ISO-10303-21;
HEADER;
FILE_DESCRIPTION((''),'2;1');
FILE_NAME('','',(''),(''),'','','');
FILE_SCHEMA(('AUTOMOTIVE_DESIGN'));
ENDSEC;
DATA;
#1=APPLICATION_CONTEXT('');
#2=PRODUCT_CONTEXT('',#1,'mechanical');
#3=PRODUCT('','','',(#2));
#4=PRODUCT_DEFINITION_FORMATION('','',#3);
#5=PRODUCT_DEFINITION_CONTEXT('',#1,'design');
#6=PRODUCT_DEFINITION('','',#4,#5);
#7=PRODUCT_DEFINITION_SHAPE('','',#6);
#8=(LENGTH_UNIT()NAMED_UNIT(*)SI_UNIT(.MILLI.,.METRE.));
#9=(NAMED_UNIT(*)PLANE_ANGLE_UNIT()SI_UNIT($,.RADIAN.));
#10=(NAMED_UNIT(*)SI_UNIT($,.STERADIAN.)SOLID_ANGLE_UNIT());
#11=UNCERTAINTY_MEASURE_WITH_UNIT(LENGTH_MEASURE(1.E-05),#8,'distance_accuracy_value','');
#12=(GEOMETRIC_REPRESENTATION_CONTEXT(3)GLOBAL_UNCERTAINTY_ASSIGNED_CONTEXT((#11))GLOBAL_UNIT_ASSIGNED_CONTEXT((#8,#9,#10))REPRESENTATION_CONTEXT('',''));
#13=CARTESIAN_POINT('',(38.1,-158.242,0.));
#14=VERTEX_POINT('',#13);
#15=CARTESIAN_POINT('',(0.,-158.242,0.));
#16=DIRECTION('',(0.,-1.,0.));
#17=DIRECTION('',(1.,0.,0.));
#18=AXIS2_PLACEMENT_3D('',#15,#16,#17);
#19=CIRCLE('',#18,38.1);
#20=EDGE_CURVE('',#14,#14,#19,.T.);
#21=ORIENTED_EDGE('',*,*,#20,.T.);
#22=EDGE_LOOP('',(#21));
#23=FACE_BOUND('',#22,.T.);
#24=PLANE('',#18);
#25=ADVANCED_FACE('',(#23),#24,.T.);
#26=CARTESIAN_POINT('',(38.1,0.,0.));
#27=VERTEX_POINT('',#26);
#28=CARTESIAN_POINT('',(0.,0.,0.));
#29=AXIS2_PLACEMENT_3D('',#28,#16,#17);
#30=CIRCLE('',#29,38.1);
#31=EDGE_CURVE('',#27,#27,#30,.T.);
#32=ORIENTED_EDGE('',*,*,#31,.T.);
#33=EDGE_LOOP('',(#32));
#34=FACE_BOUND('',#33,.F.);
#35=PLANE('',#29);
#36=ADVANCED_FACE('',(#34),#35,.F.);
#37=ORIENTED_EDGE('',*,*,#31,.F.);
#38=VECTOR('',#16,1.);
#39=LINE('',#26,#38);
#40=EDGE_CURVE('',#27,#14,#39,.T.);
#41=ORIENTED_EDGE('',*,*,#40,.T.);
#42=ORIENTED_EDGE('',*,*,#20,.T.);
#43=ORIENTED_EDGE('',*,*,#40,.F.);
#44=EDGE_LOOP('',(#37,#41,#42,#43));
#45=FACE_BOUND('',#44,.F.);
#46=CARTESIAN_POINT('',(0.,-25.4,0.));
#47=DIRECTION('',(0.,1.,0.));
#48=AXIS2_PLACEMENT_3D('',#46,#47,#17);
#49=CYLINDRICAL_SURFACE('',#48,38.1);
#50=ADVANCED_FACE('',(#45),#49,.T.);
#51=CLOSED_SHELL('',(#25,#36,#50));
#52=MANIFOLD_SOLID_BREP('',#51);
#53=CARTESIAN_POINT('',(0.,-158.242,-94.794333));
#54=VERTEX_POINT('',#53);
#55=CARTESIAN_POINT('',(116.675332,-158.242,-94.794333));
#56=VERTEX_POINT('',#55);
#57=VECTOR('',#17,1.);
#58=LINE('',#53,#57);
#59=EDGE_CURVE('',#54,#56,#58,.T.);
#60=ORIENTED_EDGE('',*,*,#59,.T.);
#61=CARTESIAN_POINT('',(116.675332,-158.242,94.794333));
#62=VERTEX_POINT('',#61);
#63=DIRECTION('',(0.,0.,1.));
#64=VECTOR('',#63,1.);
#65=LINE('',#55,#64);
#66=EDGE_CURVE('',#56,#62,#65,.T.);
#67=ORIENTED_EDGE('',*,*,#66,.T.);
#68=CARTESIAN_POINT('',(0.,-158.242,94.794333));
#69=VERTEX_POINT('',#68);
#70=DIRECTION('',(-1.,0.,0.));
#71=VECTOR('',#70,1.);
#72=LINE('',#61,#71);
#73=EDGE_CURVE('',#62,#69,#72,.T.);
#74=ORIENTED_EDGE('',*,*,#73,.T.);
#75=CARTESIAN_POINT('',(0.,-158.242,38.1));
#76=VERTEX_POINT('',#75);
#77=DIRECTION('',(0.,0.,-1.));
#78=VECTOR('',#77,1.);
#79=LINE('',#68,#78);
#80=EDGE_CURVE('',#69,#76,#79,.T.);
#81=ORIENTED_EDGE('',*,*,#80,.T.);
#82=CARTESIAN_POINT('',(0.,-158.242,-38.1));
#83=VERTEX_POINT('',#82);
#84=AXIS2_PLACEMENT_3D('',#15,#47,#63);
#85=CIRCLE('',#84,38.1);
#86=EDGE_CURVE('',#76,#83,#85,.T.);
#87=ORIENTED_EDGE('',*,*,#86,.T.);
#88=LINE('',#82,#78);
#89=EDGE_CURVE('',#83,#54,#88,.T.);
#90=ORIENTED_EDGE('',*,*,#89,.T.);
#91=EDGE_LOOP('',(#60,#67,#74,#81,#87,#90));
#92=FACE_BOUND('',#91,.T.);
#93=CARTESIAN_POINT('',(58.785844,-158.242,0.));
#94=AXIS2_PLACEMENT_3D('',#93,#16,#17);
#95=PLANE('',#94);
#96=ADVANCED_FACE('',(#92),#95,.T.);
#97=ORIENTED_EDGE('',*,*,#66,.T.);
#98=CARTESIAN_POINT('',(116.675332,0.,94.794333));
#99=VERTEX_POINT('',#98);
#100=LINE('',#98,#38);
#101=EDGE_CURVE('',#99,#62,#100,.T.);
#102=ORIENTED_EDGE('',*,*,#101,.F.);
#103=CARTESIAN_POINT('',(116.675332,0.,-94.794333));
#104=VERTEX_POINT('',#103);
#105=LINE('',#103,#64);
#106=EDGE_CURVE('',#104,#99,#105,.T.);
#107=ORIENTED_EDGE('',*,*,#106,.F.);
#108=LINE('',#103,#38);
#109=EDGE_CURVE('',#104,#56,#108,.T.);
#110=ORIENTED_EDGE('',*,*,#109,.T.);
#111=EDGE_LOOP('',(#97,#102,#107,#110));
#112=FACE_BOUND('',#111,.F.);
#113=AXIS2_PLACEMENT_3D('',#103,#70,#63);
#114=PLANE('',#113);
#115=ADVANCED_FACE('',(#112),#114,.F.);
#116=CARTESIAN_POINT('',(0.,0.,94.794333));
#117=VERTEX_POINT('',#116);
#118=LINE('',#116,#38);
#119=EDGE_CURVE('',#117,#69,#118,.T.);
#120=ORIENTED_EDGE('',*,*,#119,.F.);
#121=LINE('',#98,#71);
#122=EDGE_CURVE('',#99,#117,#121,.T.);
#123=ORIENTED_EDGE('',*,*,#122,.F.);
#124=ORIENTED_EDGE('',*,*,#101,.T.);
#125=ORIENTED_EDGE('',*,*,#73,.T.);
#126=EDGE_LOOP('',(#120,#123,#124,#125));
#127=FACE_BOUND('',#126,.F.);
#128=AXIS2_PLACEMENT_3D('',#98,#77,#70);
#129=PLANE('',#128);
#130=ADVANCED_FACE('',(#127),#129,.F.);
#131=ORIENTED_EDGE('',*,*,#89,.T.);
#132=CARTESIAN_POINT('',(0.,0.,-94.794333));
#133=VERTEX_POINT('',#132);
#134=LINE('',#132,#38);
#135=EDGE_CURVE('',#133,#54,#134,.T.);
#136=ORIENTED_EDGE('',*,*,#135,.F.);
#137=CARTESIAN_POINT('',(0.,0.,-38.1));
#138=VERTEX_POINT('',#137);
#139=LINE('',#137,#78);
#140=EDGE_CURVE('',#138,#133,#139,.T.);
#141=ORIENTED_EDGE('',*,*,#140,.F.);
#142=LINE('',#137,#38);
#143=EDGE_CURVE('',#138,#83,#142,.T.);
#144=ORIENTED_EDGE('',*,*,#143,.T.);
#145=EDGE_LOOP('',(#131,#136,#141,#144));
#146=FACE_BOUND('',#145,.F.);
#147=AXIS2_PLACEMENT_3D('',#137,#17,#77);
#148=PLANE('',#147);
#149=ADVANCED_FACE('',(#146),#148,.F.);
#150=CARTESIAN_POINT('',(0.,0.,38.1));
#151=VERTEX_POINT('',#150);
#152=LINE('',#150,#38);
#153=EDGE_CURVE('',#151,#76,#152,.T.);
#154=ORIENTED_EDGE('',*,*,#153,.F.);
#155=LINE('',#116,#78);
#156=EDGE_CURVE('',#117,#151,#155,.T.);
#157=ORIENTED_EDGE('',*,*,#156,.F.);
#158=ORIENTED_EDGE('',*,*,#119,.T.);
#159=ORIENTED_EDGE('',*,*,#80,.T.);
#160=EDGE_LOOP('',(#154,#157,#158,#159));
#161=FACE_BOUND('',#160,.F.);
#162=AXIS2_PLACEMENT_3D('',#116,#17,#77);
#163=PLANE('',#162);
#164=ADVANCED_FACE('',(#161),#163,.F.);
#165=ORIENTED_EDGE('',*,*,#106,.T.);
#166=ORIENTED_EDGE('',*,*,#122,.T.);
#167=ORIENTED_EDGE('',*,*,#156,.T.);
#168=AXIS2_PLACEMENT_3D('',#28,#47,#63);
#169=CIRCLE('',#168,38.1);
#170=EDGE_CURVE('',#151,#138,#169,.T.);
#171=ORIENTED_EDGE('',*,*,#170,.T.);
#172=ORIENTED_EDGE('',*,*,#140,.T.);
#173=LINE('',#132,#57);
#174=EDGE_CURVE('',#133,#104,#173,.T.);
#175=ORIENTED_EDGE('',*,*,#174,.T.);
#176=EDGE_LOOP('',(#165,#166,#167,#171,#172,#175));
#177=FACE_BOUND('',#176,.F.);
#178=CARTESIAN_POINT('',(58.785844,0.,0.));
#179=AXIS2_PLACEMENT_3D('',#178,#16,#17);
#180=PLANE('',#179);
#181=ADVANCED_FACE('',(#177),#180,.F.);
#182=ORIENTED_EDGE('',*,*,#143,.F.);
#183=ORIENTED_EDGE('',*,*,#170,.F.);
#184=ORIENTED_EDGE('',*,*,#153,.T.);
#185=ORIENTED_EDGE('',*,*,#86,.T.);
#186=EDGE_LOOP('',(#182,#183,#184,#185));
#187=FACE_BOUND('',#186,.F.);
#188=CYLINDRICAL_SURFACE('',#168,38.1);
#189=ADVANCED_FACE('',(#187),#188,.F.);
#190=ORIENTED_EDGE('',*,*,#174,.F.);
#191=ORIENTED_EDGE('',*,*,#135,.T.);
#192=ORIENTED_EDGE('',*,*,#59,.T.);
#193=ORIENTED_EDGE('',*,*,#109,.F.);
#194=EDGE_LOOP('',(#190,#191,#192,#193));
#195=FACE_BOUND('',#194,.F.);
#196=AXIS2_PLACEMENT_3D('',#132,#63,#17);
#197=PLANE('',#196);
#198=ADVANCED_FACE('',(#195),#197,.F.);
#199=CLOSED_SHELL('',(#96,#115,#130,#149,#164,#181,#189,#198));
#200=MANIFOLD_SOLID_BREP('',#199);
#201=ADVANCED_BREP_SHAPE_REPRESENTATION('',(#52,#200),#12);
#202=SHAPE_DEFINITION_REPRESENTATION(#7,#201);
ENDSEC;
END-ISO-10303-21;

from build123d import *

# Parameters (mm, degrees)
F0_R     = 38.1
F1_DEPTH = 25.4
F3_DEPTH = 158.242
F4_DEPTH = 132.842


with BuildPart() as f1:
    # F0 (on Front) → F1 (new body)
    with BuildSketch(Plane.XZ):
        Circle(F0_R)
    extrude(amount=F1_DEPTH)

    # F4 (add, through all): a face of the model
    f4_faces = [f1.faces().sort_by_distance(p)[0] for p in [
        (0, -25.4, 0),
    ]]
    extrude(f4_faces, amount=F4_DEPTH)


with BuildPart() as f3:
    # F2 (on Front) → F3 (new body)
    with BuildSketch(Plane.XZ):
        with BuildLine():
            ThreePointArc((0, 38.1), (38.1, 0), (0, -38.1))
            Line((0, -38.1), (0, -94.7943329811))
            Line((0, -94.7943329811), (116.6753321886, -94.7943329811))
            Line((116.6753321886, -94.7943329811), (116.6753321886, 0))
            Line((116.6753321886, 0), (116.6753321886, 94.7943329811))
            Line((116.6753321886, 94.7943329811), (0, 94.7943329811))
            Line((0, 94.7943329811), (0, 38.1))
        make_face()
    extrude(amount=F3_DEPTH)


solid = Compound([f1.part, f3.part])
